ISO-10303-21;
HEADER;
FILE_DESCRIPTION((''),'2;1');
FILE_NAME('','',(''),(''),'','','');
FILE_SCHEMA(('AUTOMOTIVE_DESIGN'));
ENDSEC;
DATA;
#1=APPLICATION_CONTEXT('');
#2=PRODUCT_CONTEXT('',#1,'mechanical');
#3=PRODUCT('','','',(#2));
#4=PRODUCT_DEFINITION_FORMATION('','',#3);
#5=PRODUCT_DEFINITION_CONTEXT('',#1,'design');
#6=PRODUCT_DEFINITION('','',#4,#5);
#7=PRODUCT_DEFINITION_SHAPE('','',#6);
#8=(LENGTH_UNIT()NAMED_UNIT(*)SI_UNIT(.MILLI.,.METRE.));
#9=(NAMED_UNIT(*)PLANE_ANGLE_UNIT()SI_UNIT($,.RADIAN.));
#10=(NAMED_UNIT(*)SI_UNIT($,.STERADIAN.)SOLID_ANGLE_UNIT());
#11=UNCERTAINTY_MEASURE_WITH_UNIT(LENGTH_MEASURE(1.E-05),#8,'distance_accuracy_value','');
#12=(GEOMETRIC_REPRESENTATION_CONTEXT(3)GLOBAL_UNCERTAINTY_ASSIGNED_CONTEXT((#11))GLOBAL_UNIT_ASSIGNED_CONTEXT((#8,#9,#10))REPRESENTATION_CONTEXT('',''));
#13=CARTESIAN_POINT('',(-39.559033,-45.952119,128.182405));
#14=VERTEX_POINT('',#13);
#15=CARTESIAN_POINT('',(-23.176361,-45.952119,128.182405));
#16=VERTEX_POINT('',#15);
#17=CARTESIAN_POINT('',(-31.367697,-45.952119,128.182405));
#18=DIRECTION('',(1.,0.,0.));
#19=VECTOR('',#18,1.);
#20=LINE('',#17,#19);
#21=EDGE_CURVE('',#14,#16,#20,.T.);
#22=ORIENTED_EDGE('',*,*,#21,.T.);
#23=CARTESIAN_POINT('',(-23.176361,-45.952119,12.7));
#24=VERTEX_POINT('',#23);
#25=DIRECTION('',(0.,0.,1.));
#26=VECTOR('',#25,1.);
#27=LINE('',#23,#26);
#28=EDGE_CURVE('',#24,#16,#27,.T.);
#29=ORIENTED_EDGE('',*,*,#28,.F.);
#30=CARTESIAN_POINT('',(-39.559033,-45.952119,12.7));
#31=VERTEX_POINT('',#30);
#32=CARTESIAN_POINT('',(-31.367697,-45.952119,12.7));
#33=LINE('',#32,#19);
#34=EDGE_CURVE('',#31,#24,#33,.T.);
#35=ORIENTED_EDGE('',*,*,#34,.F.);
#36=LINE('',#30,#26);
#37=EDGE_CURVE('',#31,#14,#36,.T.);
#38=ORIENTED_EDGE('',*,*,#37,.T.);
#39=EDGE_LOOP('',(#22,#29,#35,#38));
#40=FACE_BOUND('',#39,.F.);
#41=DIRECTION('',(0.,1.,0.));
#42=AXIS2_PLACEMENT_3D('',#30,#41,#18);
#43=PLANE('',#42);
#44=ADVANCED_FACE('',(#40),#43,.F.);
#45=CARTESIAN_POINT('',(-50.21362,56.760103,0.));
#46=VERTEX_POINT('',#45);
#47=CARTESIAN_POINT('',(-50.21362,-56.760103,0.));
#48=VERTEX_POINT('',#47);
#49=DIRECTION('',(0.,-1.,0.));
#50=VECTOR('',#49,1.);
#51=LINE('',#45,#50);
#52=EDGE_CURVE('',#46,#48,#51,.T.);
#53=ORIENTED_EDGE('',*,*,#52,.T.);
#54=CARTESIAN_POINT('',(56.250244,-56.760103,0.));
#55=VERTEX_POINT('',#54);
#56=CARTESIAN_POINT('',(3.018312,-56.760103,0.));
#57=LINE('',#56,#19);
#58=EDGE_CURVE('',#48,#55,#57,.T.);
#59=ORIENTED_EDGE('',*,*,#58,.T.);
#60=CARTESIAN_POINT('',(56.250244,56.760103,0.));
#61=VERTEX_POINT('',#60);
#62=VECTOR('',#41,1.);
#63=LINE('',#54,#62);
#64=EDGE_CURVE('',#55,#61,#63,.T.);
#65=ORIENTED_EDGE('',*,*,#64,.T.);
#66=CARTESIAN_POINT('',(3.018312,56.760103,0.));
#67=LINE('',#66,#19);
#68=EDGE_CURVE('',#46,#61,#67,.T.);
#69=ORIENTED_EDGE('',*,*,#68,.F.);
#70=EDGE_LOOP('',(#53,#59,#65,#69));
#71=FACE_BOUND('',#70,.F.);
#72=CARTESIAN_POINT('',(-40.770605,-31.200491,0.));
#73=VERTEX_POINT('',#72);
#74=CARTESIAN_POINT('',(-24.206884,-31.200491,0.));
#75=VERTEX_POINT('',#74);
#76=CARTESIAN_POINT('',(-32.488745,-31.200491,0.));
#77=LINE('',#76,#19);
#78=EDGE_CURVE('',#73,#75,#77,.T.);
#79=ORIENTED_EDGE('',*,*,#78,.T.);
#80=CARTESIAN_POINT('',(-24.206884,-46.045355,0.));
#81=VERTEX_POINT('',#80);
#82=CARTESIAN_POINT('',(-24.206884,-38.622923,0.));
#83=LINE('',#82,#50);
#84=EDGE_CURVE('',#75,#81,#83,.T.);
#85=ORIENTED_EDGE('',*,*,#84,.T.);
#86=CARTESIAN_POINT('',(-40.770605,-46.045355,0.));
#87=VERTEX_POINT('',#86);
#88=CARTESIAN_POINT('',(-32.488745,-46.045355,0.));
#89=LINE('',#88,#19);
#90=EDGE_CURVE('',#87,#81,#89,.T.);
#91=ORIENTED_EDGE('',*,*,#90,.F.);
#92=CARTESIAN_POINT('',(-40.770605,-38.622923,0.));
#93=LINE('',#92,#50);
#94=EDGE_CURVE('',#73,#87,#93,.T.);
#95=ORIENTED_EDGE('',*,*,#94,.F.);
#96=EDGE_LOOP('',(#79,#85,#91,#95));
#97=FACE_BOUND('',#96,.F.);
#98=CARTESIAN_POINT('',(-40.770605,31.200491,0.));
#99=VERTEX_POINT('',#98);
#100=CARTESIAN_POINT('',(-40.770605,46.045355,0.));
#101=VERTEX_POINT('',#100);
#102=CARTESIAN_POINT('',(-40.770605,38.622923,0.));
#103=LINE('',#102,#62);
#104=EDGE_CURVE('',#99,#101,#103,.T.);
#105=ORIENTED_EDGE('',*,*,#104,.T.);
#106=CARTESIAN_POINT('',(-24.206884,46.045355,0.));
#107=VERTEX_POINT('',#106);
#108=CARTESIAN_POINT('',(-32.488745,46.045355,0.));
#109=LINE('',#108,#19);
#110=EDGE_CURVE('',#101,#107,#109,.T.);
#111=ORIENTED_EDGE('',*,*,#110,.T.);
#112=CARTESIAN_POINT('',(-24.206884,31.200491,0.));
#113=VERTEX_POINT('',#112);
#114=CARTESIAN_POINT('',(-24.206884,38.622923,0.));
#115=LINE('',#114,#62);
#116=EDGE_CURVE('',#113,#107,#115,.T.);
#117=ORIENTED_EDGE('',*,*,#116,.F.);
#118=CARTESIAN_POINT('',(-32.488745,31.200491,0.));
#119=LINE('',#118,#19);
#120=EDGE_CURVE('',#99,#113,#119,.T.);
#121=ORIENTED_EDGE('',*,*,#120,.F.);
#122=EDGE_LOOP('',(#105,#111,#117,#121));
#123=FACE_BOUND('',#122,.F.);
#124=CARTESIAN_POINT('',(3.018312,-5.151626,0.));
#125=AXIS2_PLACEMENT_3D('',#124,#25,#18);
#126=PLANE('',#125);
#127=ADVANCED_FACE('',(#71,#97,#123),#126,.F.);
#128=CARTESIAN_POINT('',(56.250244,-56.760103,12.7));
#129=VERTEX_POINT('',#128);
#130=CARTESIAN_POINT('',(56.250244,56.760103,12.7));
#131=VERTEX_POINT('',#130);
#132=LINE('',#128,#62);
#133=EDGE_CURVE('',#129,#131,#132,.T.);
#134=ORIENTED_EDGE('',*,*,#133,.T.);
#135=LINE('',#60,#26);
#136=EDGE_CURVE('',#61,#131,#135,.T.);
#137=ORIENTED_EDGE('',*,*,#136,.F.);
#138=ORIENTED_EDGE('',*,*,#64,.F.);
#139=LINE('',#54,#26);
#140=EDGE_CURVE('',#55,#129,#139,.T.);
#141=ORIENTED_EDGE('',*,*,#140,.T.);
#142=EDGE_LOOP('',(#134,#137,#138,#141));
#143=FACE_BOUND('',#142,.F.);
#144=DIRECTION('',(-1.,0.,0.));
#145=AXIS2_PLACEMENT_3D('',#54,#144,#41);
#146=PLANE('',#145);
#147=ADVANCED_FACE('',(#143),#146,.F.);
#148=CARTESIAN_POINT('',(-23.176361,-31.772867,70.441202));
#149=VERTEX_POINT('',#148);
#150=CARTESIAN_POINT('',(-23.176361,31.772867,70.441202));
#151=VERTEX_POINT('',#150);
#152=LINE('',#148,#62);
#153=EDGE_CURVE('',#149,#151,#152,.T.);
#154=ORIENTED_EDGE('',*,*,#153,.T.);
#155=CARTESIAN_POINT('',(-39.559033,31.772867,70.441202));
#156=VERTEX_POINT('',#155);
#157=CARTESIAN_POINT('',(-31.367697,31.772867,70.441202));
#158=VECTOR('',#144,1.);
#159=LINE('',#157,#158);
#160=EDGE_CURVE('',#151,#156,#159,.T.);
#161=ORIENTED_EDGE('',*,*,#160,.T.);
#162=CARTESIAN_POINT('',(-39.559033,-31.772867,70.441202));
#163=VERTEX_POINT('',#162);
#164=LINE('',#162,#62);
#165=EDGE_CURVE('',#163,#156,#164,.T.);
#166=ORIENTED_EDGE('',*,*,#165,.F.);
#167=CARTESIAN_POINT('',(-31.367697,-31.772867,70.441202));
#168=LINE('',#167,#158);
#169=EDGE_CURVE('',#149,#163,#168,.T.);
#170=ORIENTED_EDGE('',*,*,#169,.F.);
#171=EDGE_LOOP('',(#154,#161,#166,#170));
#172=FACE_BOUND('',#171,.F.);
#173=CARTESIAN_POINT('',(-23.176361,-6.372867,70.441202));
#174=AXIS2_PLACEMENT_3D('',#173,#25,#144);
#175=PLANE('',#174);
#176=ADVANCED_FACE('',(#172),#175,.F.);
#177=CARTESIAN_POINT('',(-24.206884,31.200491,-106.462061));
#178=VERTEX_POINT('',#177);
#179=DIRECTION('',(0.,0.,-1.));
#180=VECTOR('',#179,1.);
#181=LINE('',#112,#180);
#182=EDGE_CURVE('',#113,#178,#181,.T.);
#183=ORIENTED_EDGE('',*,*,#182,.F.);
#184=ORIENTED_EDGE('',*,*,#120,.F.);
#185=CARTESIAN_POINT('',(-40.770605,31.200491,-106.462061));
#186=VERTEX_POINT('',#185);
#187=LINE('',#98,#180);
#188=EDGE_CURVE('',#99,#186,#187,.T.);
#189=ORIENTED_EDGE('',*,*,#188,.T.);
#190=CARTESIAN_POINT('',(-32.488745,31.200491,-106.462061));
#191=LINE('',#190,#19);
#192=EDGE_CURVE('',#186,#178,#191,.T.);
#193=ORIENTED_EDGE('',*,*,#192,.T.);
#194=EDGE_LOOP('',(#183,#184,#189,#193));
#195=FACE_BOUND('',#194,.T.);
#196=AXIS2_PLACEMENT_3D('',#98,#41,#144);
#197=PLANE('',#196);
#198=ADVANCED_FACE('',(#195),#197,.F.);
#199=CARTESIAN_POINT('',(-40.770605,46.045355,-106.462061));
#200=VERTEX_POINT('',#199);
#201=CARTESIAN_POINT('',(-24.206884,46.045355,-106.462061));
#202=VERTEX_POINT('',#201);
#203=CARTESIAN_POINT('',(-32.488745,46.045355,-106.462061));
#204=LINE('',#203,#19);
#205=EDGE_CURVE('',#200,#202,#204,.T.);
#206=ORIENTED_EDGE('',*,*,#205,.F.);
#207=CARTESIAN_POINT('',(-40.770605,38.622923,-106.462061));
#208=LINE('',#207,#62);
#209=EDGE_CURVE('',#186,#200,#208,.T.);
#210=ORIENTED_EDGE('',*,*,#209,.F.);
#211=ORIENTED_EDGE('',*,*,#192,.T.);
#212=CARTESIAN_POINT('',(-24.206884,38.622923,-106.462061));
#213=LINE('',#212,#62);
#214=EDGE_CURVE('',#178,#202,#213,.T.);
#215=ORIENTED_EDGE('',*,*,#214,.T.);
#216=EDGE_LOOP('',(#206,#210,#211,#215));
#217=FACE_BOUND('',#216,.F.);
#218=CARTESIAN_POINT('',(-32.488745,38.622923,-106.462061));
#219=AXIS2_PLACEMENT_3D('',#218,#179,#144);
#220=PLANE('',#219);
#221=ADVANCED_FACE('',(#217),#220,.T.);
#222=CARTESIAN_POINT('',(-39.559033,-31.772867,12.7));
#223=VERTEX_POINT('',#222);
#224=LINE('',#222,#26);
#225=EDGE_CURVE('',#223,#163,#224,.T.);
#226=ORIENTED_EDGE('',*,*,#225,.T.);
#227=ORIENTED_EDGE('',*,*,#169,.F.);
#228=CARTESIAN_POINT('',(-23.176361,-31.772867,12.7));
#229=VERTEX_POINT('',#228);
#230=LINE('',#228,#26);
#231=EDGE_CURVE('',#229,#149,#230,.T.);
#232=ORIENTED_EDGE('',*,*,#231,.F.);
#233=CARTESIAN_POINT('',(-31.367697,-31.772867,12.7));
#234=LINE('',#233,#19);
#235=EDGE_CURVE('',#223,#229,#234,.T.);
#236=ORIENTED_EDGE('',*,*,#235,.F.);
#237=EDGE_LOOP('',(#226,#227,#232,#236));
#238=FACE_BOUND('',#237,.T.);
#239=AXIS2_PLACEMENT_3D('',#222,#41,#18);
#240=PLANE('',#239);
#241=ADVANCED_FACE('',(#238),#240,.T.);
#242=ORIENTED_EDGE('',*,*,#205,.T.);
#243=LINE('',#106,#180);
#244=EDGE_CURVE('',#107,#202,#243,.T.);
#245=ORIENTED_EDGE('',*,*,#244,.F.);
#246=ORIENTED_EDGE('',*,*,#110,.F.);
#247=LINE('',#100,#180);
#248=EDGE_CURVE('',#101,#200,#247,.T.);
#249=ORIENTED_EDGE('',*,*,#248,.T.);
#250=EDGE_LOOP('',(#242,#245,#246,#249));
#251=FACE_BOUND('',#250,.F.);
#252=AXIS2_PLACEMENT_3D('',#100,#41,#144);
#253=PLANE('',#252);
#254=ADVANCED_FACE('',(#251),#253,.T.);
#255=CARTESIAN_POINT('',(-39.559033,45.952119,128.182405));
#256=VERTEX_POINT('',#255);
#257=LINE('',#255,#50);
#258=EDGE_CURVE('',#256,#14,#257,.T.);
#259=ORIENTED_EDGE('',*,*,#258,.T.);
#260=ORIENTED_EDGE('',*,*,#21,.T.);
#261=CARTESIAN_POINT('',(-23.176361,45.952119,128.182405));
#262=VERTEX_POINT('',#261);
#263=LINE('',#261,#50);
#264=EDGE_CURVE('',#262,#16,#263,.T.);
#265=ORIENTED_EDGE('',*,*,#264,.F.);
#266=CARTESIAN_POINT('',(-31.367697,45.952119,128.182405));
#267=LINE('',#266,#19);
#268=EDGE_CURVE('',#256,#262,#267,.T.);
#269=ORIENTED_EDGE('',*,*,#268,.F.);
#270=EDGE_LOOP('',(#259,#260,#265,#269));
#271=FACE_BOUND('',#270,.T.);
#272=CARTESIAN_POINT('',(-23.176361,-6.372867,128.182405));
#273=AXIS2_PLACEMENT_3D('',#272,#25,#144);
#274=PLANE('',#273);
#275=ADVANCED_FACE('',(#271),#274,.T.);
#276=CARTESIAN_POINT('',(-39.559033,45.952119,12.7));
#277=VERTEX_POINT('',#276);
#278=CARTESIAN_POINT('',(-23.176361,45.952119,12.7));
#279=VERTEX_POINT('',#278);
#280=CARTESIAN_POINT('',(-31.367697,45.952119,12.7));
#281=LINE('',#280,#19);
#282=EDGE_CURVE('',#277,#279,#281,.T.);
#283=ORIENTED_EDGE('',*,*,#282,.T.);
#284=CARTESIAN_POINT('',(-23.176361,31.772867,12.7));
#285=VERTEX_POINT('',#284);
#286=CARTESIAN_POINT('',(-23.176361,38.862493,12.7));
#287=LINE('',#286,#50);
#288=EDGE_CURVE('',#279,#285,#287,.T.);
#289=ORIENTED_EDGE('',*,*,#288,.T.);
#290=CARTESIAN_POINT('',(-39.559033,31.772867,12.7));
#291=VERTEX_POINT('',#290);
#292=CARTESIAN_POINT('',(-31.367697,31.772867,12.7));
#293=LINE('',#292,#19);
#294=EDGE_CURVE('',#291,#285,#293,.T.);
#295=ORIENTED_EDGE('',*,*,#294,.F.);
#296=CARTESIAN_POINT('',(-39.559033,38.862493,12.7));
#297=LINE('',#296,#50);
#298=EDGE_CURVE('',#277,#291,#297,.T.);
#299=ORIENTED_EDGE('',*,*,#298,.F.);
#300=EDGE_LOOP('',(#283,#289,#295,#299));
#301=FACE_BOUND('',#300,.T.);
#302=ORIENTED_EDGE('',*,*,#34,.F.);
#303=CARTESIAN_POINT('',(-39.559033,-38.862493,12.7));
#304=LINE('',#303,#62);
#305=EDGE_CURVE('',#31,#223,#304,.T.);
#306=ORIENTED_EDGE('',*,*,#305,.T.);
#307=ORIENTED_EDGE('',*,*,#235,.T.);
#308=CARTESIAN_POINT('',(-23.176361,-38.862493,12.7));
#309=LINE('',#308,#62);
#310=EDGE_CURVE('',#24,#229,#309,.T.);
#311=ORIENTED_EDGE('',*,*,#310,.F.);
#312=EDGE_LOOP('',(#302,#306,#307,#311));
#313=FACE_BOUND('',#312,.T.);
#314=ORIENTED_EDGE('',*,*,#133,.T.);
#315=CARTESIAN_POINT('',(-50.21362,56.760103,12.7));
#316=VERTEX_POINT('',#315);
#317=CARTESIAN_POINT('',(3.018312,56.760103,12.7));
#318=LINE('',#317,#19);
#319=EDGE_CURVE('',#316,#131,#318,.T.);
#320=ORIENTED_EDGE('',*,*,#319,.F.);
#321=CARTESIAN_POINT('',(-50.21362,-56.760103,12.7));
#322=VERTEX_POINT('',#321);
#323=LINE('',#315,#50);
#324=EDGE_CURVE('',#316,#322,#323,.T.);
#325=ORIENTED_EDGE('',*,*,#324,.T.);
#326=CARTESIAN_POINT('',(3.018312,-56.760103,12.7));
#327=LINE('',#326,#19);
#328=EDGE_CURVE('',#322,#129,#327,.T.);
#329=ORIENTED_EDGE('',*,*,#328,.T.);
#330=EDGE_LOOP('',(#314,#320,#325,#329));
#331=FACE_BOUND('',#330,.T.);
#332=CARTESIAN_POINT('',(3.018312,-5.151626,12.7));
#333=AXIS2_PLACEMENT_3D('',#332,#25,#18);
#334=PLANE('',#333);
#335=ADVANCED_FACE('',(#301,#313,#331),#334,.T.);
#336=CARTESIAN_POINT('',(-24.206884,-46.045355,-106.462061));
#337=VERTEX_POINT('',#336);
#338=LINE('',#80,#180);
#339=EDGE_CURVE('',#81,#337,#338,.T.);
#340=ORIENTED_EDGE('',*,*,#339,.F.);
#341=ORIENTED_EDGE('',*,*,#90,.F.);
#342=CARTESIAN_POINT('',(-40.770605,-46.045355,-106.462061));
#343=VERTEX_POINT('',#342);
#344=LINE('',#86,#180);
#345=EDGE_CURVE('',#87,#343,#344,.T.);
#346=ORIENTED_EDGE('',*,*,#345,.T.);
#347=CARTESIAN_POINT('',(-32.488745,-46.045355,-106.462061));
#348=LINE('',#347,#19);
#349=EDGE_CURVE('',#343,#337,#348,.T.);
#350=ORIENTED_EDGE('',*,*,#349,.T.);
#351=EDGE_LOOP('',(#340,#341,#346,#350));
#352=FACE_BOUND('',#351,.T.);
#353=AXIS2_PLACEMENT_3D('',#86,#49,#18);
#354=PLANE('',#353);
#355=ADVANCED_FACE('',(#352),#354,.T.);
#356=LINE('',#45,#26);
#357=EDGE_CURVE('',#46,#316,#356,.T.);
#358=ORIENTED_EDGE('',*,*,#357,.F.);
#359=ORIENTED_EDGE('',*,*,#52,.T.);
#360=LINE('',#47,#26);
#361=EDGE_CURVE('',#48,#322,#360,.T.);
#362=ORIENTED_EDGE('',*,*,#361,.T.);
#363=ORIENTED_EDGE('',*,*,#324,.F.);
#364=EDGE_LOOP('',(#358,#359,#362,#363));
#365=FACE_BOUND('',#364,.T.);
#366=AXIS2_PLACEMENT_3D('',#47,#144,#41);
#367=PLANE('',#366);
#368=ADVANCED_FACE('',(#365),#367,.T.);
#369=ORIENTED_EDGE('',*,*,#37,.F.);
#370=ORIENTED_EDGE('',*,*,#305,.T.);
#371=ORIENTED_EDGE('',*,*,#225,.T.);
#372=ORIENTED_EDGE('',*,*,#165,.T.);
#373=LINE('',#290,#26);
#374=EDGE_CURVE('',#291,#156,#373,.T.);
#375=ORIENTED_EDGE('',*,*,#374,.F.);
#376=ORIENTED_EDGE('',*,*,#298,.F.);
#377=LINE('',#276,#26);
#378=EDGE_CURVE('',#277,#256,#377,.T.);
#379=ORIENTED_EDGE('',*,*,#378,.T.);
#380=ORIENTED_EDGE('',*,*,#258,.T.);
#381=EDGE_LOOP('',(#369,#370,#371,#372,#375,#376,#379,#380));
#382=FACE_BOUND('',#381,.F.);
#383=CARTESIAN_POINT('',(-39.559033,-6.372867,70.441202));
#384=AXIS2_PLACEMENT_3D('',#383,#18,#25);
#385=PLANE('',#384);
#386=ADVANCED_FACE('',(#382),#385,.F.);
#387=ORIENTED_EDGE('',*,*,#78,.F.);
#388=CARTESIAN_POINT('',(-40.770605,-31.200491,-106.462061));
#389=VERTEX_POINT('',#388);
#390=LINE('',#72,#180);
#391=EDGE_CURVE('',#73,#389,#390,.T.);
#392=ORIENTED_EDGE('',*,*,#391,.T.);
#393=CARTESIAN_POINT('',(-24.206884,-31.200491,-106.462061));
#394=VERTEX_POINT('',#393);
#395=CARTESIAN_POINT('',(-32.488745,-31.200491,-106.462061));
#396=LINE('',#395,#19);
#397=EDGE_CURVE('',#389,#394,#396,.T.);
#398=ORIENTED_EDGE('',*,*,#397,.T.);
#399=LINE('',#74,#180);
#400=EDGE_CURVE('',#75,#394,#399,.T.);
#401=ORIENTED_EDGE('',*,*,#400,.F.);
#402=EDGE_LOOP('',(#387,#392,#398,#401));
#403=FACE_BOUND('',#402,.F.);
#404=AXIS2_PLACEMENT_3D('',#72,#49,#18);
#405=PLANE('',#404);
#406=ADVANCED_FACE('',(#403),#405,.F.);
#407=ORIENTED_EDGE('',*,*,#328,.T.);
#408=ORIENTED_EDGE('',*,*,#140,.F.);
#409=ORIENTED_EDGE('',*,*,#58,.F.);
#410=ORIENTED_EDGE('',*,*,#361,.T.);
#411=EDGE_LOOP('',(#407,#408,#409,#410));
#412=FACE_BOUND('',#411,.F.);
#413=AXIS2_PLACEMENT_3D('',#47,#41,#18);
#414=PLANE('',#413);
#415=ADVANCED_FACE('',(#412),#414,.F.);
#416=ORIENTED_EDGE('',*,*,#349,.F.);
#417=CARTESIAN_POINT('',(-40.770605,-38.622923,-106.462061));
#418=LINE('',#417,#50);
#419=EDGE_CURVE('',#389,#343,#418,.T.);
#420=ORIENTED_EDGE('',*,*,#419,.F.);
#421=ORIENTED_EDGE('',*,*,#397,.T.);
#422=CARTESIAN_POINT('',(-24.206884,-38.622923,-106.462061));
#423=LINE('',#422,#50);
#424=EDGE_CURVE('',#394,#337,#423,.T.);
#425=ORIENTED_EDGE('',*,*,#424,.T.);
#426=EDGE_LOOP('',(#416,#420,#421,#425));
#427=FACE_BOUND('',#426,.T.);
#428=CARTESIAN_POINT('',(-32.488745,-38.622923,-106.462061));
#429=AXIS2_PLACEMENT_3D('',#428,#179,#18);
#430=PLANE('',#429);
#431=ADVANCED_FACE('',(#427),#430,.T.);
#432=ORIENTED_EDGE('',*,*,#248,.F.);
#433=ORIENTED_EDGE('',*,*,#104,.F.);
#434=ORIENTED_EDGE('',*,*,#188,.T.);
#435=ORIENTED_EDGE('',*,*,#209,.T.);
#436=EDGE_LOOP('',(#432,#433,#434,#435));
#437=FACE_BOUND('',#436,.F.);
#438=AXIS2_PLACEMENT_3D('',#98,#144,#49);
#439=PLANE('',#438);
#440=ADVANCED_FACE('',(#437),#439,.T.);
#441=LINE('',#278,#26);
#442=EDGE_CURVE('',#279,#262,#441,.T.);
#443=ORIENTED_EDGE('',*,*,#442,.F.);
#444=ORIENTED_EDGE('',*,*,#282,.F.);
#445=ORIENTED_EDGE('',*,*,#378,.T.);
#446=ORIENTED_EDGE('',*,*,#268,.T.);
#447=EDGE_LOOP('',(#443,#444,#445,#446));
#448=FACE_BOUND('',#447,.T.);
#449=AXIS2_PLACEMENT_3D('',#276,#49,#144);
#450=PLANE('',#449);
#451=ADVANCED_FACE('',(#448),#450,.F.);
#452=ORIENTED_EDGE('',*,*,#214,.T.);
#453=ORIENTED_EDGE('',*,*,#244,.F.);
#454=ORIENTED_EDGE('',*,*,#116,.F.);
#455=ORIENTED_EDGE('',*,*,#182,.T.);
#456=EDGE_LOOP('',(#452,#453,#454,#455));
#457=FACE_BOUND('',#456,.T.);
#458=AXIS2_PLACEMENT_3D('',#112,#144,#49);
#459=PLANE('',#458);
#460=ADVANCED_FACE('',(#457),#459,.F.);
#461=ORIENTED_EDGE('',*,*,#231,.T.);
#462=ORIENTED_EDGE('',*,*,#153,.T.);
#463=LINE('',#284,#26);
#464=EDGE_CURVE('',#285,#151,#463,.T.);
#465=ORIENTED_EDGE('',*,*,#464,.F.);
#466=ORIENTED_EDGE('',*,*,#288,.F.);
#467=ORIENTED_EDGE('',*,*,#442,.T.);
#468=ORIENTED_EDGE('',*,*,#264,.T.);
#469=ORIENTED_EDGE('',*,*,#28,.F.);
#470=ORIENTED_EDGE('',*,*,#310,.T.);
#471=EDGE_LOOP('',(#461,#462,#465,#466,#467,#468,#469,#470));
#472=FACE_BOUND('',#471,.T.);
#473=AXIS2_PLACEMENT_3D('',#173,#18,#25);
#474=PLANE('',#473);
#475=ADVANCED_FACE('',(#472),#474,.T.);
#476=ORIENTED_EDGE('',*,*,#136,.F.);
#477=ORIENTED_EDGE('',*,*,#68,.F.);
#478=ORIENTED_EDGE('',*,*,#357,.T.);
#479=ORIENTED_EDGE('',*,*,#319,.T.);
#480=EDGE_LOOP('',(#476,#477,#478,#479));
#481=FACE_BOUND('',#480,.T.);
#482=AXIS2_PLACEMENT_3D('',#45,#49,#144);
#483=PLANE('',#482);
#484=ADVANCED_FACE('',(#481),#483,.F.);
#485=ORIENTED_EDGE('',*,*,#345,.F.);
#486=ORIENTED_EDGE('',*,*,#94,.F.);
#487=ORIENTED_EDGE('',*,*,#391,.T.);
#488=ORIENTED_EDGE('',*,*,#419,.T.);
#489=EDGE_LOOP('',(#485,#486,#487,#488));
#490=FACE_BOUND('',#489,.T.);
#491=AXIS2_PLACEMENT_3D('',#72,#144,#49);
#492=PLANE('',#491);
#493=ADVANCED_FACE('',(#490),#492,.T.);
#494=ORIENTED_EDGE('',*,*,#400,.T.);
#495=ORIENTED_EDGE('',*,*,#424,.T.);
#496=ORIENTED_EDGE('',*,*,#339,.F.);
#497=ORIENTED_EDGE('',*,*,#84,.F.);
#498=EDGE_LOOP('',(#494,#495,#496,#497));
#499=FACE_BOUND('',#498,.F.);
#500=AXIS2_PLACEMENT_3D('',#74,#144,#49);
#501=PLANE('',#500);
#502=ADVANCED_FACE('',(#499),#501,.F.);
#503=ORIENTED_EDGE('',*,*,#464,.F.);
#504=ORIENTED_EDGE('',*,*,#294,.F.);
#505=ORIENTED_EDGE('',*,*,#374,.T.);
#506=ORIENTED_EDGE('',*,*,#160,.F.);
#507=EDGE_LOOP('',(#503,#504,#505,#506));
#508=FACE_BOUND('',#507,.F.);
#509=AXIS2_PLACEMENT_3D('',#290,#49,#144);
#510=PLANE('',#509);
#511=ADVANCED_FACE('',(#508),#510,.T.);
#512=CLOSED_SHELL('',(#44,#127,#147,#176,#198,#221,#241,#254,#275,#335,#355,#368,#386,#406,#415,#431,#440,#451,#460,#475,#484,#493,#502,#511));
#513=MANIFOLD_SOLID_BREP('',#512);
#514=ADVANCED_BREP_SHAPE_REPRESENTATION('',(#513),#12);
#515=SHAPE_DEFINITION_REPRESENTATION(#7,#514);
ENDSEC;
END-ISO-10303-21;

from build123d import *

# Parameters (mm, degrees)
F0_W      = 106.4638644457
F0_H      = 103.2169535756
F1_DEPTH  = 12.7
F2_W      = 16.3826718926
F2_H      = 14.1792520881
F3_DEPTH  = 115.4824048281
F4_W      = 16.3826718926
F4_H      = 57.741202414
F5_DEPTH  = 25.4
F7_DEPTH  = 12.7457336903
F8_W      = 16.5637210011
F8_H      = 14.8448646069
F9_DEPTH  = 106.4620614052
F10_R     = 29.9454441035
F11_DEPTH = 25.4


with BuildPart() as f1:
    # F0 (on Top) → F1 (new body)
    with BuildSketch(Plane.XY):
        with Locations((3.0183121562, -5.1516257226)):
            Rectangle(F0_W, F0_H)
    extrude(amount=F1_DEPTH)

    # F2 (on face) → F3 (join)
    with BuildSketch(Plane.XY.offset(12.7)):
        with Locations((-31.3676968217, -38.8624928892)):
            Rectangle(F2_W, F2_H)
    extrude(amount=F3_DEPTH)

    # F4 (on face) → F5 (join)
    with BuildSketch(Plane(origin=(0, -31.7728668451, 0), x_dir=(-1, 0, 0), z_dir=(0, 1, 0))):
        with Locations((31.3676968217, 99.3118036211)):
            Rectangle(F4_W, F4_H)
    extrude(amount=F5_DEPTH)

    # F6: F1 across plane


with BuildPart() as f1_1:
    add(f1.part)
    add(f1.part.mirror(Plane.XZ))

    # F7 (add, through all): a face of the model
    f7_faces = [f1_1.faces().sort_by_distance(p)[0] for p in [
        (-31.3676968217, -6.3728668451, 99.3118036211),
    ]]
    extrude(f7_faces, amount=F7_DEPTH)

    # F8 (on face) → F9 (join)
    with BuildSketch(Plane(origin=(0, 0, 0), x_dir=(1, 0, 0), z_dir=(0, 0, -1))):
        with Locations((-32.4887447059, 38.6229231954)):
            Rectangle(F8_W, F8_H)
    extrude(amount=F9_DEPTH)

    # F13: F1 across plane


with BuildPart() as f11:
    # F10 (on Top) → F11 (new body)
    with BuildSketch(Plane.XY):
        with Locations((108.9618206024, 20.2722847462)):
            Circle(F10_R)
    extrude(amount=F11_DEPTH)


with BuildPart() as f1_2:
    add(f1_1.part)
    add(f1_1.part.mirror(Plane.XZ))


solid = f1_2.part
